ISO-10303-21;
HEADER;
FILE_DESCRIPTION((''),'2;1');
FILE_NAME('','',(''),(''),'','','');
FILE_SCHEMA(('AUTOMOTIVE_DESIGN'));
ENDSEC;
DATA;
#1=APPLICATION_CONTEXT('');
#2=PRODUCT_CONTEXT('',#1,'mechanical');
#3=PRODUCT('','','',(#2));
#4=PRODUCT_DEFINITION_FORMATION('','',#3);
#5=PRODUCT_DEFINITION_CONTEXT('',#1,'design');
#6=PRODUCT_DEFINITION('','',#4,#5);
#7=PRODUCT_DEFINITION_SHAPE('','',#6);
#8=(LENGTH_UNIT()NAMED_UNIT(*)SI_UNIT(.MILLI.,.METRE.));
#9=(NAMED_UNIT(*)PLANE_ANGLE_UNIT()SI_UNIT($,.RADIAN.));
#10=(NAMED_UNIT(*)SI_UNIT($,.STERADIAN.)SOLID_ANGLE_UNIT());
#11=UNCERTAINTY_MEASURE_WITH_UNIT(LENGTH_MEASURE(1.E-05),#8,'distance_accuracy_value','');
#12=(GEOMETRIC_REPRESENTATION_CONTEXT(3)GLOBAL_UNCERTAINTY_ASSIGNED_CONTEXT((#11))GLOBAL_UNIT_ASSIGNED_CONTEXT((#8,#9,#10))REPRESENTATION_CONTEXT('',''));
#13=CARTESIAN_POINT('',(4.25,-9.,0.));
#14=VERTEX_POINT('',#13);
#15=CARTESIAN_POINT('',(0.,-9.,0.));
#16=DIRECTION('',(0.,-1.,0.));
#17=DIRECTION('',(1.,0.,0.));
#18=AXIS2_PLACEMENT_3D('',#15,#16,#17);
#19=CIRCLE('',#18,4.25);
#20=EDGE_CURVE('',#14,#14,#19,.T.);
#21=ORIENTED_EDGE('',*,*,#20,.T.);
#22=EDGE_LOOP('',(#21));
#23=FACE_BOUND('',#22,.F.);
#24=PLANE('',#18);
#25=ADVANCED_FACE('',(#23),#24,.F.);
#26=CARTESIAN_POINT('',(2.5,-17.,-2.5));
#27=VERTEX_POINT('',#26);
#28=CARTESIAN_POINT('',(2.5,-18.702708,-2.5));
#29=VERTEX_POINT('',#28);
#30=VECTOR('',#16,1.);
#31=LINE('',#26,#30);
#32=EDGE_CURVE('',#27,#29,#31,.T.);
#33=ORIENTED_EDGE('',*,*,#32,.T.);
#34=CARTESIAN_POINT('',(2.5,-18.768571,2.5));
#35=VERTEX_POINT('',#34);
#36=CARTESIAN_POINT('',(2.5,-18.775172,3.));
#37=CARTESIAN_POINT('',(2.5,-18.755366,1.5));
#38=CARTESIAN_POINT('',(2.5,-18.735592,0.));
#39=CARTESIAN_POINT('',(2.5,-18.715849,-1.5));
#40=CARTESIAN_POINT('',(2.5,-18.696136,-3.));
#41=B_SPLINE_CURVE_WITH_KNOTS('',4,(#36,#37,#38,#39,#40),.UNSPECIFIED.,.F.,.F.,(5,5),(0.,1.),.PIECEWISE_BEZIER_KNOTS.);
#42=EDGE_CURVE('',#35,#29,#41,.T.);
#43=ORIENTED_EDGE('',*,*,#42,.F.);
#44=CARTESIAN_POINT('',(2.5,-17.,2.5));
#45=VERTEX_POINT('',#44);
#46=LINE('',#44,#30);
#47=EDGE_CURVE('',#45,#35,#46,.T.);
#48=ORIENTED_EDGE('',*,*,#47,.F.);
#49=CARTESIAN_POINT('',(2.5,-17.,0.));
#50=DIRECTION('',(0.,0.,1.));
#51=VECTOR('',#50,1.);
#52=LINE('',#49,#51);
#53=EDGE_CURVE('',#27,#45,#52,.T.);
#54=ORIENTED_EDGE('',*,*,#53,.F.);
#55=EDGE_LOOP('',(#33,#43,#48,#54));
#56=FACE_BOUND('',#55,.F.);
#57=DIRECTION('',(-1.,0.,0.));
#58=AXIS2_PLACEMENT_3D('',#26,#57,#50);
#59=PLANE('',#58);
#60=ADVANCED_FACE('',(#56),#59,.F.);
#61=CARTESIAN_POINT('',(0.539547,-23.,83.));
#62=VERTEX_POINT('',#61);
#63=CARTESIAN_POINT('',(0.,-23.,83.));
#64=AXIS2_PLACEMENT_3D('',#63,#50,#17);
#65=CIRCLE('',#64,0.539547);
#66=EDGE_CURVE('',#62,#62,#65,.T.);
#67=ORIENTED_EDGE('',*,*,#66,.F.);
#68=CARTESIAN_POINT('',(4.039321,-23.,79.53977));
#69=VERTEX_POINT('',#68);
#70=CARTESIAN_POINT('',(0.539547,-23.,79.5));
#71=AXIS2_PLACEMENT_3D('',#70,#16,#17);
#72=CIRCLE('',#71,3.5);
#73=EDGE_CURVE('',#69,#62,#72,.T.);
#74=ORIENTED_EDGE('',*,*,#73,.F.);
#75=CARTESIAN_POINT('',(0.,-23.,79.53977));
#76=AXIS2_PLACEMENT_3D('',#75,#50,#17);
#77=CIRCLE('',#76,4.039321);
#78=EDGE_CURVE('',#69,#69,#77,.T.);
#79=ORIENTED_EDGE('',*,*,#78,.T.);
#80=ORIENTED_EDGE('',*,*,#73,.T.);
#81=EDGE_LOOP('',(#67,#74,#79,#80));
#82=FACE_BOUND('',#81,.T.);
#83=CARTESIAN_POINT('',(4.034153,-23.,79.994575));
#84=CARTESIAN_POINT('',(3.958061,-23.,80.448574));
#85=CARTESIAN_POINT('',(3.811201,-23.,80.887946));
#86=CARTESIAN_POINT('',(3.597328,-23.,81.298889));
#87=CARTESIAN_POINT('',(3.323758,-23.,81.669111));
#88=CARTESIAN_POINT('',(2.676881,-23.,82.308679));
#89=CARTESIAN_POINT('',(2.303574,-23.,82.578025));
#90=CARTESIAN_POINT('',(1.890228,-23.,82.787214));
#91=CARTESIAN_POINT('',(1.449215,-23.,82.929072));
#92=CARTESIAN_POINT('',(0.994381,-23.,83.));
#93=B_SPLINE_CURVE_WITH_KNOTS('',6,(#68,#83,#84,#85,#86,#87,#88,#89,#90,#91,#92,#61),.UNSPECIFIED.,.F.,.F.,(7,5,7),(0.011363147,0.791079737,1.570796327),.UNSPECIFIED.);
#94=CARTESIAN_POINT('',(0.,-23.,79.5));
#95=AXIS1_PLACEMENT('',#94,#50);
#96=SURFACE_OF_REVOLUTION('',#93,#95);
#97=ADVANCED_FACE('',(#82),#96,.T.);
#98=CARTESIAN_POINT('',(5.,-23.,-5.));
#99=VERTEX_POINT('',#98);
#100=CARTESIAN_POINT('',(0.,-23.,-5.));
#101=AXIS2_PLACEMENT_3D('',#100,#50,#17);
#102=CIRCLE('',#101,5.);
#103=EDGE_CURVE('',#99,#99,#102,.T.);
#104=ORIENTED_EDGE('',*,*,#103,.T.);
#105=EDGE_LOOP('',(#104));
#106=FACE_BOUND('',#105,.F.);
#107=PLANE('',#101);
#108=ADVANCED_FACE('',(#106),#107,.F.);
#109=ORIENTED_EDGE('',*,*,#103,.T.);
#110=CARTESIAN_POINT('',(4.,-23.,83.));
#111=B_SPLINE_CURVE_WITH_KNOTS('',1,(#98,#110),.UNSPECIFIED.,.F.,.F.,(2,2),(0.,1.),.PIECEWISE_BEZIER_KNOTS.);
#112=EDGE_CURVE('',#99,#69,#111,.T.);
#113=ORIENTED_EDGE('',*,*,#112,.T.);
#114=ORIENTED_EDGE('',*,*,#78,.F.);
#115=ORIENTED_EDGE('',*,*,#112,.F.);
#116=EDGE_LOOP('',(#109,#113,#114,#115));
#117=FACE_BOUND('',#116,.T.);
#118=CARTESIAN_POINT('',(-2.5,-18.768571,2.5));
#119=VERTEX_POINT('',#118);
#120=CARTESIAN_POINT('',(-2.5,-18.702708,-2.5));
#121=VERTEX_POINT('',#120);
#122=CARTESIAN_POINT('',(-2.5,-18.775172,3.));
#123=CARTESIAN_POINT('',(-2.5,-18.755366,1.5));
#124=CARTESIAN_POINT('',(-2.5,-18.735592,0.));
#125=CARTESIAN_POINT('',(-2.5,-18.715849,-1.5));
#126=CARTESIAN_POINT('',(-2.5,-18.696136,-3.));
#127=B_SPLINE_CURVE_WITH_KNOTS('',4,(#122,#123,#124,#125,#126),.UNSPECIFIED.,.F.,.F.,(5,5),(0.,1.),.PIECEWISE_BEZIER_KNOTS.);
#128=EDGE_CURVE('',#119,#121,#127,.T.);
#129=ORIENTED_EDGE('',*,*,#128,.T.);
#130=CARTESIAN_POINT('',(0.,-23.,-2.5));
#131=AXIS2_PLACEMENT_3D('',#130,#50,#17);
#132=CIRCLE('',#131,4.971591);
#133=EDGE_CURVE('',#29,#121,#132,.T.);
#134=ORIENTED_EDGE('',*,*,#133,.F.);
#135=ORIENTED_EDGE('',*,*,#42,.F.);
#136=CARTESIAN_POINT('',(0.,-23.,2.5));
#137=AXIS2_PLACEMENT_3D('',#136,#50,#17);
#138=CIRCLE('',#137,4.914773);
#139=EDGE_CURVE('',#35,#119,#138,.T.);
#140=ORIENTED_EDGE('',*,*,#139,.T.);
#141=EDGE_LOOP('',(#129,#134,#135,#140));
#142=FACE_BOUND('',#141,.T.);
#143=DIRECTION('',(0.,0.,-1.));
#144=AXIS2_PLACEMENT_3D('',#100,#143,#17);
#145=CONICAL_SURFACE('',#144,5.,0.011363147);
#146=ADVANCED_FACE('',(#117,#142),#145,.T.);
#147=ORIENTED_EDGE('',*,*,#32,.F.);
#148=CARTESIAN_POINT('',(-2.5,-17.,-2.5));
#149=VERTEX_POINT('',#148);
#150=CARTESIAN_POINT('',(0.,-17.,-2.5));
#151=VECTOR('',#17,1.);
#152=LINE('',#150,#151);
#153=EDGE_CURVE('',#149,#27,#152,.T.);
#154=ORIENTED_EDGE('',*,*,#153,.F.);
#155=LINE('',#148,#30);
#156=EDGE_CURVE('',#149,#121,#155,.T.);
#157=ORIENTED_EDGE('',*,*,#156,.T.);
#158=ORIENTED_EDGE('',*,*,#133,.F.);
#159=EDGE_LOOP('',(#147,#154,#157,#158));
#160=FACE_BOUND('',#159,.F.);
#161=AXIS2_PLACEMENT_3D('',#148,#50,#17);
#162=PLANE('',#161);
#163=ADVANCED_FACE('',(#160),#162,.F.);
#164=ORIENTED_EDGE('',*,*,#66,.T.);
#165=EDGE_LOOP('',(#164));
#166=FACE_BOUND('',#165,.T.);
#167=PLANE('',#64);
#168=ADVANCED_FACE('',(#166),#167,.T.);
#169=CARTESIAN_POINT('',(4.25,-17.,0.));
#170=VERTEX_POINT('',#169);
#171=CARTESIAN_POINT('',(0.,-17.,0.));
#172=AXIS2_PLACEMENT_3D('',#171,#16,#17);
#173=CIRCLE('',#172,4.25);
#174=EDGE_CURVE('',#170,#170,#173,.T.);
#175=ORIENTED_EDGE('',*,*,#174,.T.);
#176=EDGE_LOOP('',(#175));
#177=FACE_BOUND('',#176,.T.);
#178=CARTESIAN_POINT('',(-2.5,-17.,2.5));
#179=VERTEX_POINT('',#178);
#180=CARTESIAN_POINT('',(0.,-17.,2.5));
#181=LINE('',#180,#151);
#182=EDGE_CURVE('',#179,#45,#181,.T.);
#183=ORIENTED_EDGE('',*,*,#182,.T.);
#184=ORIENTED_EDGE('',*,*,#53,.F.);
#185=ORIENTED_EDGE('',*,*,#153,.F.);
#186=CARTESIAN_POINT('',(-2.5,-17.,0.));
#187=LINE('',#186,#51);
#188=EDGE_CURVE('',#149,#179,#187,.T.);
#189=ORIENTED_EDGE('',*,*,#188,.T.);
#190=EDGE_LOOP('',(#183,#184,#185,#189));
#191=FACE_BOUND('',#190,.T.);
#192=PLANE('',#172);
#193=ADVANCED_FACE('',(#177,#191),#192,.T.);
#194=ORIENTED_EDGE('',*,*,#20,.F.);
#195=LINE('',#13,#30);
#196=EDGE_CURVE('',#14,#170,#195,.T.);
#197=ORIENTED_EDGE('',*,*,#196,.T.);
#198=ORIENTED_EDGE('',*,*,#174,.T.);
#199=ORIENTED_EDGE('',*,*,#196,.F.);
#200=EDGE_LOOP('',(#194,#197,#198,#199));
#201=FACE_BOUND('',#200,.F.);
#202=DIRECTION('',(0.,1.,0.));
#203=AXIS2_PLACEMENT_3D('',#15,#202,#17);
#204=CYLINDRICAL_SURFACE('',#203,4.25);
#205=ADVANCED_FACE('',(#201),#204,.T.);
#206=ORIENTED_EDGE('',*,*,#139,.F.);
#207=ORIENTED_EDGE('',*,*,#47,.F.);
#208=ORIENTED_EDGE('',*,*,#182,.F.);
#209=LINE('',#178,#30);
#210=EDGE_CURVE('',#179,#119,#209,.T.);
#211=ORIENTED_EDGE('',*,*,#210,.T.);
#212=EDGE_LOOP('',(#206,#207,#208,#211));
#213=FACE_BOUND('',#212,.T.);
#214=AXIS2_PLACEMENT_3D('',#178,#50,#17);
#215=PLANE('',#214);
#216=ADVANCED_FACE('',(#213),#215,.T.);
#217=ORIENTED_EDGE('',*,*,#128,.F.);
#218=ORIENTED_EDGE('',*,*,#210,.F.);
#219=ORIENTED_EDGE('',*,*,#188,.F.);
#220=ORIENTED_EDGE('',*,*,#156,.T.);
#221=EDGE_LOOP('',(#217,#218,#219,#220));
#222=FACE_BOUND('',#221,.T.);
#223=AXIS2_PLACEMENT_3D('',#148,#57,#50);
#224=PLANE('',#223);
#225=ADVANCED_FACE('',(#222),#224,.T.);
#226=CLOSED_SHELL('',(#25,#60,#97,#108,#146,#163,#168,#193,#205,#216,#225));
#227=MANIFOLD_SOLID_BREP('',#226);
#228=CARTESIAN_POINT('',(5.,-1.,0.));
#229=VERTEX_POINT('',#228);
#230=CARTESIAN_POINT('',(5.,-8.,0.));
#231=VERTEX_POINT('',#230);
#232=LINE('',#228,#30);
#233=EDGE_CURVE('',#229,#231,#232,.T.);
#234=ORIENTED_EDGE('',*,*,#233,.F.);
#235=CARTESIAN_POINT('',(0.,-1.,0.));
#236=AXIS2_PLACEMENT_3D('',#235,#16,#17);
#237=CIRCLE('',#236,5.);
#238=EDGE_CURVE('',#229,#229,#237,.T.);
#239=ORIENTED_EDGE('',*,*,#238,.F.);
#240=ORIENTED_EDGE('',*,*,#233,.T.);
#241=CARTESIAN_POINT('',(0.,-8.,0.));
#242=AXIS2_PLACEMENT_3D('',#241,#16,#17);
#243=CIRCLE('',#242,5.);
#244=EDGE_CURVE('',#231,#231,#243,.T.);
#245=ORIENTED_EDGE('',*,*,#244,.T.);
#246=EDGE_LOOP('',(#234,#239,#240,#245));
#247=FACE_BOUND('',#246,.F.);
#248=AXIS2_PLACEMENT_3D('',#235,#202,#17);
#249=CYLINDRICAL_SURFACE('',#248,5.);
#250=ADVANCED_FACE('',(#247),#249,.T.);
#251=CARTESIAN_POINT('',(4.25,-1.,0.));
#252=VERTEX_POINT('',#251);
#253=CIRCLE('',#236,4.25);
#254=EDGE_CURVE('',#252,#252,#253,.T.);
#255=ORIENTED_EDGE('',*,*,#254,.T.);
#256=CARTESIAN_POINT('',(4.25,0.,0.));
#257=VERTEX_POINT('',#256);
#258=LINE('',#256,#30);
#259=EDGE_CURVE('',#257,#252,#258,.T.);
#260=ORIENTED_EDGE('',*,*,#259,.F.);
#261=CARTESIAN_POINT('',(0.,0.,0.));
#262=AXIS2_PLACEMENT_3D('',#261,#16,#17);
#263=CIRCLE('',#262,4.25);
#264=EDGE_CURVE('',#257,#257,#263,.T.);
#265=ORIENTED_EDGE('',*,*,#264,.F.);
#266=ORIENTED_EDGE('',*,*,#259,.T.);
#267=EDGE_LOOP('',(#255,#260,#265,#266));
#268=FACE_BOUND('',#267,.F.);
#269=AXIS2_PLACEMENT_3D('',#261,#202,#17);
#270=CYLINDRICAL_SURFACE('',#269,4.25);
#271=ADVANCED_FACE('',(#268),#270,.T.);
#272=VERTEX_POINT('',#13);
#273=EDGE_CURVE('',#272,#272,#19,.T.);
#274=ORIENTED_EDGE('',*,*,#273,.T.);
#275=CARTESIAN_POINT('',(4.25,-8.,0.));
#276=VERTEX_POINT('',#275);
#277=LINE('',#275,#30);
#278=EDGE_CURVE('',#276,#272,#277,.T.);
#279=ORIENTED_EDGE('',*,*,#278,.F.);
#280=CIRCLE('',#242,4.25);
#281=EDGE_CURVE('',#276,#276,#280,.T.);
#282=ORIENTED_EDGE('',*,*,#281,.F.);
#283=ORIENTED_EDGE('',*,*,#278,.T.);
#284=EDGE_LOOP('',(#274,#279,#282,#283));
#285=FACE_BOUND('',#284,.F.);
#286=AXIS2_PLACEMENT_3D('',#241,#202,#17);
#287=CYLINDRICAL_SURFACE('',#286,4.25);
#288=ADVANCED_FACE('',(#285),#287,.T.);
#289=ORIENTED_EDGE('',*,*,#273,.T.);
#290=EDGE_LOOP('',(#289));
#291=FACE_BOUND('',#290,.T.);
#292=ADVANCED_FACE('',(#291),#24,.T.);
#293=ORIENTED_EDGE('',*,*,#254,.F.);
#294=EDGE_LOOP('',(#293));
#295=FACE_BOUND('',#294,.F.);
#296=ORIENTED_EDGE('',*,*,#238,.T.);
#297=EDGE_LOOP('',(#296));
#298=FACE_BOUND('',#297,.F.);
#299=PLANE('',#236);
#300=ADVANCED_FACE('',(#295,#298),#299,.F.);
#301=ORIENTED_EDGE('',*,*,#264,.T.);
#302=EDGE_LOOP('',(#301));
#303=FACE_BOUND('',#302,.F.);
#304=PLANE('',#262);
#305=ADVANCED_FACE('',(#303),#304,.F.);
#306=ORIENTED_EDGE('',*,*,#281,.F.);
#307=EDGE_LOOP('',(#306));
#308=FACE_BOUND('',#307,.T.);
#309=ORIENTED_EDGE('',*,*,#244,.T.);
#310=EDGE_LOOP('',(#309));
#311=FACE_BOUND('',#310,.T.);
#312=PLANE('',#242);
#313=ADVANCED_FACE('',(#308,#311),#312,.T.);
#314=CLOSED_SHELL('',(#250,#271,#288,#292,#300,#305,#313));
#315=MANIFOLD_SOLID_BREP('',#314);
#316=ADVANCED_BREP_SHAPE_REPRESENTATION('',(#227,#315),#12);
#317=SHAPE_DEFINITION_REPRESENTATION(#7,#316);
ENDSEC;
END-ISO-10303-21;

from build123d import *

# Parameters (mm, degrees)
F0_R     = 4.25
F1_DEPTH = 1
F2_R     = 5
F3_DEPTH = 7
F4_R     = 4.25
F5_DEPTH = 1
F6_DEPTH = 8
F7_W     = 5
F7_H     = 5
F8_DEPTH = 7
F9_R     = 2.49999
F11_R    = 5
F13_R    = 4
F15_R    = 3.5


# Not quite as in the source:
# - a fillet or chamfer is up to 0.001 mm smaller than in the source, because OpenCascade refuses the exact size


with BuildPart() as f1:
    # F0 (on Front) → F1 (new body)
    with BuildSketch(Plane.XZ):
        Circle(F0_R)
    extrude(amount=F1_DEPTH)

    # F2 (on face) → F3 (join)
    with BuildSketch(Plane.XZ.offset(1)):
        Circle(F2_R)
    extrude(amount=F3_DEPTH)

    # F4 (on face) → F5 (join)
    with BuildSketch(Plane.XZ.offset(8)):
        Circle(F4_R)
    extrude(amount=F5_DEPTH)


with BuildPart() as f6:
    # F6 (new): a face of the model
    f6_faces = [f1.part.faces().sort_by_distance(p)[0] for p in [
        (0, -9, 0),
    ]]
    extrude(f6_faces, amount=F6_DEPTH)

    # F7 (on face) → F8 (join)
    with BuildSketch(Plane.XZ.offset(17)):
        Rectangle(F7_W, F7_H)
    extrude(amount=F8_DEPTH)

    # F9 (radius 2.5 in the source; OpenCascade refuses exactly that, so slightly less here)
    f9_edges = [f6.edges().sort_by_distance(p)[0] for p in [
        (0, -24, 2.5),
        (0, -24, -2.5),
    ]]
    fillet(f9_edges, radius=F9_R)

    # F11 (on offset) → F14 section 0
    with BuildSketch(Plane.XY.offset(-5)):
        with Locations((0, -23)):
            Circle(F11_R)
    # F13 (on offset) → F14 section 1
    with BuildSketch(Plane.XY.offset(83)):
        with Locations((0, -23)):
            Circle(F13_R)
    loft()

    # F15
    f15_edges = [f6.edges().sort_by_distance(p)[0] for p in [
        (-4, -23, 83),
    ]]
    fillet(f15_edges, radius=F15_R)


solid = Compound([f1.part, f6.part])
